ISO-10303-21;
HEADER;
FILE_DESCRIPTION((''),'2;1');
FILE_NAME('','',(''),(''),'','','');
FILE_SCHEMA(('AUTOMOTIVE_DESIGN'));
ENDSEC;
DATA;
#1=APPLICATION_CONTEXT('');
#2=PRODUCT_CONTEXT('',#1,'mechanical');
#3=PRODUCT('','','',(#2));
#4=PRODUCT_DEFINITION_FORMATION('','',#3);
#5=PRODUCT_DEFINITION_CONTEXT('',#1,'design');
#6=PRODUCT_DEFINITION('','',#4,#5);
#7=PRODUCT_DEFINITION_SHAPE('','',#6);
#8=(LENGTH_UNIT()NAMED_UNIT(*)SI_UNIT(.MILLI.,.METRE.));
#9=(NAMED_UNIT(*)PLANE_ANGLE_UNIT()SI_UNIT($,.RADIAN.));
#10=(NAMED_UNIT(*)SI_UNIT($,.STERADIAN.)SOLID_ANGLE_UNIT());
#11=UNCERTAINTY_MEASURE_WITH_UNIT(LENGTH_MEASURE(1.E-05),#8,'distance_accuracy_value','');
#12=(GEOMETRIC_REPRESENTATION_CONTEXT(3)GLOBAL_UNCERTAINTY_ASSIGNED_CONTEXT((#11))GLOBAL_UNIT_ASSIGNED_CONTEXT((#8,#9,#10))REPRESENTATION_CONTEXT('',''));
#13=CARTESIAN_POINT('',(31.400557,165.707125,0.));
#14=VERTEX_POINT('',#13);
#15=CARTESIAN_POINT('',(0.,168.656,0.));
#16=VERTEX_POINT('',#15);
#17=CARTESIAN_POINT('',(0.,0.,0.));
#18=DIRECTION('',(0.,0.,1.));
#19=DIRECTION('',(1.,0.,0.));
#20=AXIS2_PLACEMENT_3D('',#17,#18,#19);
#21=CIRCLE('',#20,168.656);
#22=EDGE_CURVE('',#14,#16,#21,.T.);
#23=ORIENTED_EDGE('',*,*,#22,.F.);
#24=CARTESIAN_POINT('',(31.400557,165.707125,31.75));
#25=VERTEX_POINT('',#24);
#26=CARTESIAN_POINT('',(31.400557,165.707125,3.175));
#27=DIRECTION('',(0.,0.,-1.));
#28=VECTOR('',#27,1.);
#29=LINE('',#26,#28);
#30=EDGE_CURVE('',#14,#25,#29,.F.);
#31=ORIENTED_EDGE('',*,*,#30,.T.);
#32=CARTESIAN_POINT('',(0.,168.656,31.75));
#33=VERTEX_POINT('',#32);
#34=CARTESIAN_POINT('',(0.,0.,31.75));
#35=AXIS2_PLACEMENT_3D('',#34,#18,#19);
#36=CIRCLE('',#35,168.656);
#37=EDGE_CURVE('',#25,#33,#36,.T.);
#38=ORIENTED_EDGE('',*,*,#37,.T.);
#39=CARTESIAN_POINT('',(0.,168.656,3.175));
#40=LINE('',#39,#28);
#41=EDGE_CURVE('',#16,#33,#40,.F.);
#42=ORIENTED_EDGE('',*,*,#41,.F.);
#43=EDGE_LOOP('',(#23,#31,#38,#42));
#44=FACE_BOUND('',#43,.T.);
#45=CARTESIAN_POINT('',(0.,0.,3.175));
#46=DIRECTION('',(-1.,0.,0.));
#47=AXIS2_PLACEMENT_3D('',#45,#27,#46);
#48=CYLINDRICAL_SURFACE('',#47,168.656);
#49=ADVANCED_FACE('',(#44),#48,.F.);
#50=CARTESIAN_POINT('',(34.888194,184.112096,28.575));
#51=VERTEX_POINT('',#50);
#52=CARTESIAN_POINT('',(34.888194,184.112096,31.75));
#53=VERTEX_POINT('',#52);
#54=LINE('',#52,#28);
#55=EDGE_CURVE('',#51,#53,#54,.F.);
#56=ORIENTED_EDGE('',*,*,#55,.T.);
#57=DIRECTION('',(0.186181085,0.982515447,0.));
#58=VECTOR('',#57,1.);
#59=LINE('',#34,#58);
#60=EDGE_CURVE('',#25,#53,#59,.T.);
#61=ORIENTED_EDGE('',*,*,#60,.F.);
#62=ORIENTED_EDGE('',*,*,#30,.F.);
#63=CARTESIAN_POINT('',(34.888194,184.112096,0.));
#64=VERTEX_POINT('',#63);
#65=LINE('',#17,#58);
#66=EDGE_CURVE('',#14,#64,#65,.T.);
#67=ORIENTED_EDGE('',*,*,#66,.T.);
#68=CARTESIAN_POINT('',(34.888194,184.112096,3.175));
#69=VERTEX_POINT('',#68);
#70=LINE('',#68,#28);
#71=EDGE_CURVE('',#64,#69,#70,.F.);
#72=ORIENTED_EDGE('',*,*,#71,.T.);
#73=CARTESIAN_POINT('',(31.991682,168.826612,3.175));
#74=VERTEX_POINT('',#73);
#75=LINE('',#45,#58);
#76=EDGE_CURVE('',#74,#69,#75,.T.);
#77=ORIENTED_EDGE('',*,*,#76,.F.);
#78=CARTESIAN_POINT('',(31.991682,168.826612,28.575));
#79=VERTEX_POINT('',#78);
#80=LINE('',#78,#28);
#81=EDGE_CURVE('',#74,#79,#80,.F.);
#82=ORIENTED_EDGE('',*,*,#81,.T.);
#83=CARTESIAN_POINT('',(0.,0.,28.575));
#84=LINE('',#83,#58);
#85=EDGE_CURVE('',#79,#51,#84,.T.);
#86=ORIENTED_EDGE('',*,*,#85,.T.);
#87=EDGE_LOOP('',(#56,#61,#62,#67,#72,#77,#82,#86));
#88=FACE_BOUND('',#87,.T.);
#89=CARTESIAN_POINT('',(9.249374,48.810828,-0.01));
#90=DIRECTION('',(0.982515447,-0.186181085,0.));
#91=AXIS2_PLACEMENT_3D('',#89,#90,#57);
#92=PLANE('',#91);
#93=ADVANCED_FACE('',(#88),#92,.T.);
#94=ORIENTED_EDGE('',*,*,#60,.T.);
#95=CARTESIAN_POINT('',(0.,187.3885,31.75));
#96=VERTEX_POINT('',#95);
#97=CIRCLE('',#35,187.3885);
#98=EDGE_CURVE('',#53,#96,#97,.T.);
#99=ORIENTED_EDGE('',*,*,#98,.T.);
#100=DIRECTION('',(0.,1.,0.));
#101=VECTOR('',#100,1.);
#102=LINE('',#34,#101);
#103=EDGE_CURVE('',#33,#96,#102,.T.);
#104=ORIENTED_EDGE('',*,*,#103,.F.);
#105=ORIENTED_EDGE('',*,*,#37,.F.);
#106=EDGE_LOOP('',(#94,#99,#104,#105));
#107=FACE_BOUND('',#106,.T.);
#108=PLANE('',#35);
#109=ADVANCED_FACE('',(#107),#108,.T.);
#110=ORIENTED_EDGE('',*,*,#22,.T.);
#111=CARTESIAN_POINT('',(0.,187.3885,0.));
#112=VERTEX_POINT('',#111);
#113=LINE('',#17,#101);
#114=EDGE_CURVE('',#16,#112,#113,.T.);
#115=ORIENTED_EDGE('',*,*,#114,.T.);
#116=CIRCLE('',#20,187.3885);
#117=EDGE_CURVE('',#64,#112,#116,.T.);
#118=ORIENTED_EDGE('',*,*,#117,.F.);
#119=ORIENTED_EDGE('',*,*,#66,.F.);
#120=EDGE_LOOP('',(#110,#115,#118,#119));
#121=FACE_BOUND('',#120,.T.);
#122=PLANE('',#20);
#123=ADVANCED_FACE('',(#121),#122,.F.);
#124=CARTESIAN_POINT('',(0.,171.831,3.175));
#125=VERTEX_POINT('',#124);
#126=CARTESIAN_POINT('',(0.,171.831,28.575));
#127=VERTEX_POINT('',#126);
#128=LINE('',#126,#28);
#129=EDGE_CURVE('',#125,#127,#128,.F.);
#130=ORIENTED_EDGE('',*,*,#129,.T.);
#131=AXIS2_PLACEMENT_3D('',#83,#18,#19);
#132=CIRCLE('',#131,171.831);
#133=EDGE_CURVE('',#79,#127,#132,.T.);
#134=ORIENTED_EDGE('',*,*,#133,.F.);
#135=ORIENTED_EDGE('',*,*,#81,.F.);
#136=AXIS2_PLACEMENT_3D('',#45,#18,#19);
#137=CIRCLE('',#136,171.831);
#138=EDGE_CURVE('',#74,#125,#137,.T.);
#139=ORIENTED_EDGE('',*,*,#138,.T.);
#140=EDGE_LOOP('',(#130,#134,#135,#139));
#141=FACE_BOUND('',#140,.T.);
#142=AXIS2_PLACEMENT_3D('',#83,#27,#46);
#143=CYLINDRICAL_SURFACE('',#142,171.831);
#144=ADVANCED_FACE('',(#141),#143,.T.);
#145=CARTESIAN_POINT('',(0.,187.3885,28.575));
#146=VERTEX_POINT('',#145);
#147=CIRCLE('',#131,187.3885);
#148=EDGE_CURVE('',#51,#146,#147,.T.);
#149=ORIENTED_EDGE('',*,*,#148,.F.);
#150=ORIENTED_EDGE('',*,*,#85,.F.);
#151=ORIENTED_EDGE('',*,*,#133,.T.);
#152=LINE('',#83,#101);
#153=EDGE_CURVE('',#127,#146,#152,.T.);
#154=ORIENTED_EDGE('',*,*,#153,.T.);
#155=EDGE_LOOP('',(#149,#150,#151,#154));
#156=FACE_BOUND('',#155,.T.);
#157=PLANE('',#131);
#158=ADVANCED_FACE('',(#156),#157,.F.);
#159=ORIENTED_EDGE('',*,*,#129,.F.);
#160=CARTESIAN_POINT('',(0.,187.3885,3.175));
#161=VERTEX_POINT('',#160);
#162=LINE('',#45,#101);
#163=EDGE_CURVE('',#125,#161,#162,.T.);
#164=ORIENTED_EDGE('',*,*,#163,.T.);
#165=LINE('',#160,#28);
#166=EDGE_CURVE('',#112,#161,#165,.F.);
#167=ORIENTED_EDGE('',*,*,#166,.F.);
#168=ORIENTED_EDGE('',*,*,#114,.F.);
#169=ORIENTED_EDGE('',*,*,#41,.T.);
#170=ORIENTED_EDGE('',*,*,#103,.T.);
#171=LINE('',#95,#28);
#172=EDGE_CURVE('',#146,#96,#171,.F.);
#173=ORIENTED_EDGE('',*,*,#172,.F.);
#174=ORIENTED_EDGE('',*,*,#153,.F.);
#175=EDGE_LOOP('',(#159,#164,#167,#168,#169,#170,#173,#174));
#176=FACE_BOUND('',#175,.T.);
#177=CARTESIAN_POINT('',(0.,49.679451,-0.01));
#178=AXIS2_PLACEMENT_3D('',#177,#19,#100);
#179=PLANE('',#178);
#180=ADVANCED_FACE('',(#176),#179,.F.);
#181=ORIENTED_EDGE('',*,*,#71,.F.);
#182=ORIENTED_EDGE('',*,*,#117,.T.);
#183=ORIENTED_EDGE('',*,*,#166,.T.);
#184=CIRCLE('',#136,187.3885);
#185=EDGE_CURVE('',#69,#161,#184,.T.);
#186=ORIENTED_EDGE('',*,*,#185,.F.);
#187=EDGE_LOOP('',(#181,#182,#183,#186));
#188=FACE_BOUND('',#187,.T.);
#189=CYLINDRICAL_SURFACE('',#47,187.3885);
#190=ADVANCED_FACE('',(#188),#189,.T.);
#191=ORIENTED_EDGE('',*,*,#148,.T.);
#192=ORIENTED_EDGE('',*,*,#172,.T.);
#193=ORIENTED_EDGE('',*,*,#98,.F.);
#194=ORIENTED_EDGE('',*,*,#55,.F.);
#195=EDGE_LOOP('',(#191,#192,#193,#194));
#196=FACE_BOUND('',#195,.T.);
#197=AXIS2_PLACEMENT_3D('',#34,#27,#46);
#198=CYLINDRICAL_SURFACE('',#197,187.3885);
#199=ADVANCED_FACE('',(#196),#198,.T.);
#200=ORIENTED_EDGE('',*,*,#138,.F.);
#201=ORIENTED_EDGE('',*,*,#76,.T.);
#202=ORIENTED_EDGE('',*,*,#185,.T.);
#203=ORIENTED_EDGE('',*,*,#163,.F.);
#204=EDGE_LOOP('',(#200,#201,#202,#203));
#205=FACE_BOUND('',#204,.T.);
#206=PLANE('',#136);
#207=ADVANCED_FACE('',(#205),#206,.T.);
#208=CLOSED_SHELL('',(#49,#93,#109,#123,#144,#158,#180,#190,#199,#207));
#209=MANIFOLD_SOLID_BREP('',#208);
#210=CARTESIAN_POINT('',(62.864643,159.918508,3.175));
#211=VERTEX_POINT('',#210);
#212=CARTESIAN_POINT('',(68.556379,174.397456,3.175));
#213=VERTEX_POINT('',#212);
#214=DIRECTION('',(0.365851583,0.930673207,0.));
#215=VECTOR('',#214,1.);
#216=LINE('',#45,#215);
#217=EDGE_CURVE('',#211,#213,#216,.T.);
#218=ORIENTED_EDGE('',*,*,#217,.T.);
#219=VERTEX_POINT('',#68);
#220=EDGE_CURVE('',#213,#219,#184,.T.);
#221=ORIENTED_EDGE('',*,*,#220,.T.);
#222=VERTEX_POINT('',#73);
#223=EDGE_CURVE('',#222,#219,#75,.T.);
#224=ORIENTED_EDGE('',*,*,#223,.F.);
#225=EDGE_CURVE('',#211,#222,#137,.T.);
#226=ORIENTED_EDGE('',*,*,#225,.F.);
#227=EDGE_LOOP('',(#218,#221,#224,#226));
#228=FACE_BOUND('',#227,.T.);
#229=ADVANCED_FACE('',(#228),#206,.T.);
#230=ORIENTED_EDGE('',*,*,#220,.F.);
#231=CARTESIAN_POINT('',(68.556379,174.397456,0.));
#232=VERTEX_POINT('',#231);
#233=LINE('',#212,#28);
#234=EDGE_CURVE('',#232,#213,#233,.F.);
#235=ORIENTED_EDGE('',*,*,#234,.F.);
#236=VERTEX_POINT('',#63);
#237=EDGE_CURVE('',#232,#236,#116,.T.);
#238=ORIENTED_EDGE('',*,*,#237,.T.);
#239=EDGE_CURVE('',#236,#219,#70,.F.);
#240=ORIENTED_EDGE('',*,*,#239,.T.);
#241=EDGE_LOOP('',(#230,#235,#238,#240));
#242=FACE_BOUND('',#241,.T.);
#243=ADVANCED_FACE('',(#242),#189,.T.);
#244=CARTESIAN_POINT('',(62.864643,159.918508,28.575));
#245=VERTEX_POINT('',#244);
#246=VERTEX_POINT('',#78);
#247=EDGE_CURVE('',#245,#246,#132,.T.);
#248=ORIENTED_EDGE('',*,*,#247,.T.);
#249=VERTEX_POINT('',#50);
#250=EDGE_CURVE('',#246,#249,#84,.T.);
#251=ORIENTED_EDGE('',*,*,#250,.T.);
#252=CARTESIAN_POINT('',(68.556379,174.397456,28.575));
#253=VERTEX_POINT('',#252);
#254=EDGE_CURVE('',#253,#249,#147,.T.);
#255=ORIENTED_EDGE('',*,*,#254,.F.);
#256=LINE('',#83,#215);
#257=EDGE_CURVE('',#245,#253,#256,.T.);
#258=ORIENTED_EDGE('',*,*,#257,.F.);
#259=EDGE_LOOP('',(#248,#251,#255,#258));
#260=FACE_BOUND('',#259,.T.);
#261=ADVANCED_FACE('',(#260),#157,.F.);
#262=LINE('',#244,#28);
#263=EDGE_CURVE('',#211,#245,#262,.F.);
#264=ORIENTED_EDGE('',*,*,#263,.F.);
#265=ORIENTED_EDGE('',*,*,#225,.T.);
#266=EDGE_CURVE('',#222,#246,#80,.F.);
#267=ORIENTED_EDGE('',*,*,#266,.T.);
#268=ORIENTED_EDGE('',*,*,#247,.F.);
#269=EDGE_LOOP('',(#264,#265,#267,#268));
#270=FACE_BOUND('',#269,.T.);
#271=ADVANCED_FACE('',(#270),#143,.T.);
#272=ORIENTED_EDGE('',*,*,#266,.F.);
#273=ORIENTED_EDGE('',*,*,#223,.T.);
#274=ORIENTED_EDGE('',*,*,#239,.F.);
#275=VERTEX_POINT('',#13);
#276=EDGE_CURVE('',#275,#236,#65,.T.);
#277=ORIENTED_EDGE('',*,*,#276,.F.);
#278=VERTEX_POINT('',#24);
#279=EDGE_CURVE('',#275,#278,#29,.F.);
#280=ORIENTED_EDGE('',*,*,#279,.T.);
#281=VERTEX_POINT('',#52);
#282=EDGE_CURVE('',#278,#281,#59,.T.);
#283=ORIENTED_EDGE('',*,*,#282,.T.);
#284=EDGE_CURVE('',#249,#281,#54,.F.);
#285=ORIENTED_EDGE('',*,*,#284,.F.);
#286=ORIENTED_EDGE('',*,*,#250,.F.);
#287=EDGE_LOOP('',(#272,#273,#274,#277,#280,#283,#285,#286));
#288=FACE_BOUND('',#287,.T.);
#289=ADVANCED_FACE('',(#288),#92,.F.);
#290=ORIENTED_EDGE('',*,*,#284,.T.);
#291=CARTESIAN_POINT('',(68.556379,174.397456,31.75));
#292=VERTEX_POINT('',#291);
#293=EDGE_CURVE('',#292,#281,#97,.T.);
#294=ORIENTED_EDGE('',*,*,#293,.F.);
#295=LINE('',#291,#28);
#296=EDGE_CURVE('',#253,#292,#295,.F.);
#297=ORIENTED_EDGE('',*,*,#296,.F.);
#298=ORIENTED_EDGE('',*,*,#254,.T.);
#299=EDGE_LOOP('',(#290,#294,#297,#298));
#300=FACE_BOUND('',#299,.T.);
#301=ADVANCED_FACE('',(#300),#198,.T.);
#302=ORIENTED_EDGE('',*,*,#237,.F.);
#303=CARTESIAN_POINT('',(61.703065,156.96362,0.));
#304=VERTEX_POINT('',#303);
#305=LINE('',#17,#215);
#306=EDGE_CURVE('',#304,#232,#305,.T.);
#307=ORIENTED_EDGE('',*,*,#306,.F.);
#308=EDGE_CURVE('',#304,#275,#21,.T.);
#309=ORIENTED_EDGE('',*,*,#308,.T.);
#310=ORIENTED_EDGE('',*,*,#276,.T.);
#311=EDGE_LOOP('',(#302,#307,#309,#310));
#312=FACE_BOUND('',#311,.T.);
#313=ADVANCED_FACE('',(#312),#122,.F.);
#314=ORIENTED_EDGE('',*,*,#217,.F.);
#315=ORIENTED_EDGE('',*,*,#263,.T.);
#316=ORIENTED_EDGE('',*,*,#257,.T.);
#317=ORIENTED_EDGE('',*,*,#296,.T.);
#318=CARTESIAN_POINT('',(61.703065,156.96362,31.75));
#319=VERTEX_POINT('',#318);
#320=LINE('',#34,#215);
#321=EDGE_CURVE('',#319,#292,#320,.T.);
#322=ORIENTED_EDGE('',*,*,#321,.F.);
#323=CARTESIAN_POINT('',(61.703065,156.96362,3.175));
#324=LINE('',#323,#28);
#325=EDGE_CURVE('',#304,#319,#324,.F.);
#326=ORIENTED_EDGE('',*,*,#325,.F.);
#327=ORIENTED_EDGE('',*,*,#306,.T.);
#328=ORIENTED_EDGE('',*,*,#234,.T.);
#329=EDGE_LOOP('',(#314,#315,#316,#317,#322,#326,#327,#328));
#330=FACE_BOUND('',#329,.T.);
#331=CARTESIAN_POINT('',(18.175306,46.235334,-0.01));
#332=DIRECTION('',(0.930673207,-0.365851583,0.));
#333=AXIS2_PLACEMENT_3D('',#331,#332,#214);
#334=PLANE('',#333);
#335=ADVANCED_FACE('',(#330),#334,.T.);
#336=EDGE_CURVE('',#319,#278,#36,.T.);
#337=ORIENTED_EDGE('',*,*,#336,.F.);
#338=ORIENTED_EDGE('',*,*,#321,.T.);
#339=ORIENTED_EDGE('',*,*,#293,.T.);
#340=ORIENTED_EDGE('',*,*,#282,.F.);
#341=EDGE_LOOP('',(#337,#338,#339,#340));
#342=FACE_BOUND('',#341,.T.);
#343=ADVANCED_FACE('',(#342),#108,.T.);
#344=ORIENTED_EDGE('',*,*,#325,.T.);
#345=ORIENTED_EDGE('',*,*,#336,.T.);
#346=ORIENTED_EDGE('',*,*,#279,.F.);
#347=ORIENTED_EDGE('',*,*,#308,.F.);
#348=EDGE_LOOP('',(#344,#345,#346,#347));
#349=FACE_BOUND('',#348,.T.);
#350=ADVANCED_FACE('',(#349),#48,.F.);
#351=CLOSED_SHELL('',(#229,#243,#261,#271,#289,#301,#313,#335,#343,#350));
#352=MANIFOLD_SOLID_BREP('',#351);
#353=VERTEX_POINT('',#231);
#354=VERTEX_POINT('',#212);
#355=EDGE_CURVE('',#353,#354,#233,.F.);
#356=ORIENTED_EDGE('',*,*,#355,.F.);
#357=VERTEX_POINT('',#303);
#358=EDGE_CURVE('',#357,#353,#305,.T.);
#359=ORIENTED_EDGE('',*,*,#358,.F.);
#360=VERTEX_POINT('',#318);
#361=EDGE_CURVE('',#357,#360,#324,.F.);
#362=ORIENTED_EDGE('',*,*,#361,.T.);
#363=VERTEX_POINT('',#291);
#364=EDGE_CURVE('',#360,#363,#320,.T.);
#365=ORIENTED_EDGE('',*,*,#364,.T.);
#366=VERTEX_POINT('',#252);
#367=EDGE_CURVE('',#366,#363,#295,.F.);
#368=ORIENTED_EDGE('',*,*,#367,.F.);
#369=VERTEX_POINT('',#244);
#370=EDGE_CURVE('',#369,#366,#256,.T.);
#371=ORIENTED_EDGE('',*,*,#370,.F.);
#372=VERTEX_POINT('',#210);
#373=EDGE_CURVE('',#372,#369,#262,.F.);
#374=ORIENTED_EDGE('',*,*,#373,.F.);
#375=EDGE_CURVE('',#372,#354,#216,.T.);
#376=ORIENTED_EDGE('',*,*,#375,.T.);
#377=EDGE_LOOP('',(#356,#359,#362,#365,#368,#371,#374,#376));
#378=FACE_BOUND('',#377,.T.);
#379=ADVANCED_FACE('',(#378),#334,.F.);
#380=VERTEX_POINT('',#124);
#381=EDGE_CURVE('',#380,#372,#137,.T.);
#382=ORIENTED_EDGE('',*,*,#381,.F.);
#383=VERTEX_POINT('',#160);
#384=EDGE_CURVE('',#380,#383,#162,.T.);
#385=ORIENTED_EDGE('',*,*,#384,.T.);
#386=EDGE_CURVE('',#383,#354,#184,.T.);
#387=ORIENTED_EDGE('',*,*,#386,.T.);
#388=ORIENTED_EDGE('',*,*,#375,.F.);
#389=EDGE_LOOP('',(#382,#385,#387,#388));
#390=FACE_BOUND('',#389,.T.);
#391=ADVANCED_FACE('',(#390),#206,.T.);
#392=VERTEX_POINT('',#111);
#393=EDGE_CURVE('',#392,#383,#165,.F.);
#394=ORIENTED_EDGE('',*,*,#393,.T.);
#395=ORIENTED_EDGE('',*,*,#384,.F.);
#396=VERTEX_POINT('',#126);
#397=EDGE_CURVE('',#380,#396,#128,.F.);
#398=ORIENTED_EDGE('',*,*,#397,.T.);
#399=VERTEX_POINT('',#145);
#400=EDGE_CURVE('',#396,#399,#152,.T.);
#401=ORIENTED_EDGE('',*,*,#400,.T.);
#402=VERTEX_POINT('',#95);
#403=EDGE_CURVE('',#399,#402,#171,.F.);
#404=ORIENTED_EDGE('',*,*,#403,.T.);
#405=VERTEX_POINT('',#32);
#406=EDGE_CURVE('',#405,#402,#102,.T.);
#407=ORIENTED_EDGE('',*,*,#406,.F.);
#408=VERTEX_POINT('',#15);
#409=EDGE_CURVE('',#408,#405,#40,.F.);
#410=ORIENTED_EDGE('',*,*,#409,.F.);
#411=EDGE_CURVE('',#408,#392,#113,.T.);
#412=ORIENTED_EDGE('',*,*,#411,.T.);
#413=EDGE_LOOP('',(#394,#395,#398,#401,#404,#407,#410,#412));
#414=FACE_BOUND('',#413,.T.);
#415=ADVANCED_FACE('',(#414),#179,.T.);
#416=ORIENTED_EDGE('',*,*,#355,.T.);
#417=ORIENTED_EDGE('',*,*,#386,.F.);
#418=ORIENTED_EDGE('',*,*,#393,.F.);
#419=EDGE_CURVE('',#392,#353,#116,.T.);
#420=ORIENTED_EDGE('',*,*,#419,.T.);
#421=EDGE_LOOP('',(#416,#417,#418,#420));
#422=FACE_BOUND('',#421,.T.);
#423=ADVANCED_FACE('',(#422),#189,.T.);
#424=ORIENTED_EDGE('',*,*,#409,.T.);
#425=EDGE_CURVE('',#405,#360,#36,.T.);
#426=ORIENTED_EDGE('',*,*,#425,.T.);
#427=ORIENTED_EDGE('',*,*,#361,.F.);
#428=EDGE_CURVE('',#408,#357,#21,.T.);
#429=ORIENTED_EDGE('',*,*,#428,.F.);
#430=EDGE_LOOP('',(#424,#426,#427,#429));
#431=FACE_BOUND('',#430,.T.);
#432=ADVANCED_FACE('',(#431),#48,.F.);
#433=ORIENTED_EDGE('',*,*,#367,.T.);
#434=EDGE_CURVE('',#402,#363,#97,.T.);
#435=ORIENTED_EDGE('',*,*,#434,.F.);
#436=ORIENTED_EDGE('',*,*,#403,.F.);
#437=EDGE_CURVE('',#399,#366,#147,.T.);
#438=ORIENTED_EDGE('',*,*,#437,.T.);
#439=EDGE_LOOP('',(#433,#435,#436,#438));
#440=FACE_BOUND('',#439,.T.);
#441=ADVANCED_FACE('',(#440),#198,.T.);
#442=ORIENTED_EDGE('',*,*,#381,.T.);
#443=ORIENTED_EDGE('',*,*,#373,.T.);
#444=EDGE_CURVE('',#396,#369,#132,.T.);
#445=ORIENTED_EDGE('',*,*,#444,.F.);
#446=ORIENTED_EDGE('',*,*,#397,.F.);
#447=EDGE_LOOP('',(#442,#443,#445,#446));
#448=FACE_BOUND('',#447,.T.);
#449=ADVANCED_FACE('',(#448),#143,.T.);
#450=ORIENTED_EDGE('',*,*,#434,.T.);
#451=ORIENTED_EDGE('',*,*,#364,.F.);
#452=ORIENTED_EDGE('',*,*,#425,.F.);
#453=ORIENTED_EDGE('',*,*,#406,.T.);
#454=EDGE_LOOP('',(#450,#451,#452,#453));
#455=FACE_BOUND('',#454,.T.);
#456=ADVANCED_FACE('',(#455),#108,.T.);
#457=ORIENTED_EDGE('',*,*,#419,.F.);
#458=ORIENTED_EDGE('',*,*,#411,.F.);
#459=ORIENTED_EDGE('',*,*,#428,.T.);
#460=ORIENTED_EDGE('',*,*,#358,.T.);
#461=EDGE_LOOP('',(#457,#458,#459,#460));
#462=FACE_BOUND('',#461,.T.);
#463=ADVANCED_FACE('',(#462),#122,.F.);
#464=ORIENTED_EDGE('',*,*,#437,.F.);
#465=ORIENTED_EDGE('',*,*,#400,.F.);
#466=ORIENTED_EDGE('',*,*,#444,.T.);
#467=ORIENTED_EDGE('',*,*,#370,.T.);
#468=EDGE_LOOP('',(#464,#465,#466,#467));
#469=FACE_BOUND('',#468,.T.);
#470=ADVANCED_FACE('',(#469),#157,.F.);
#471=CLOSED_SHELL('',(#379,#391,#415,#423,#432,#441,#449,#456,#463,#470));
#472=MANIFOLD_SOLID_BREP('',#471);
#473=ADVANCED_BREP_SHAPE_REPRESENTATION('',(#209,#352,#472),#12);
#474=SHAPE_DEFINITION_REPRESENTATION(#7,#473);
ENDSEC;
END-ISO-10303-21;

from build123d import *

# Parameters (mm, degrees)
SKETCH2_R           = 187.3885
SKETCH2_R_2         = 168.656
BOSS_EXTRUDE1_DEPTH = 3.175
SKETCH3_R           = 171.831
SKETCH3_R_2         = 168.656
BOSS_EXTRUDE2_DEPTH = 25.4
SKETCH4_R           = 187.3885
SKETCH4_R_2         = 168.656
BOSS_EXTRUDE3_DEPTH = 3.175
SPLIT3_DEPTH        = 31.75
SPLIT3_2_DEPTH      = 3.175
SPLIT3_START        = 28.575
SPLIT3_3_DEPTH      = 3.175
SPLIT3_4_DEPTH      = 31.75
SPLIT3_5_DEPTH      = 31.75
SPLIT3_6_DEPTH      = 3.175
SPLIT3_7_DEPTH      = 3.175


# Read off the part's stored shape, not the designer's step: Split3
with BuildPart() as part:
    # Sketch2 → Boss-Extrude1 (new body)
    with BuildSketch(Plane.XY):
        Circle(SKETCH2_R)
        Circle(SKETCH2_R_2, mode=Mode.SUBTRACT)
    extrude(amount=BOSS_EXTRUDE1_DEPTH)

    # Sketch3 → Boss-Extrude2 (add)
    with BuildSketch(Plane.XY.offset(3.175)):
        Circle(SKETCH3_R)
        Circle(SKETCH3_R_2, mode=Mode.SUBTRACT)
    extrude(amount=BOSS_EXTRUDE2_DEPTH)

    # Sketch4 → Boss-Extrude3 (add)
    with BuildSketch(Plane.XY.offset(28.575)):
        Circle(SKETCH4_R)
        Circle(SKETCH4_R_2, mode=Mode.SUBTRACT)
    extrude(amount=BOSS_EXTRUDE3_DEPTH)

    # Split3 4 outline → Split3 4 (cut)
    with BuildSketch(Plane.XY):
        with BuildLine():
            ThreePointArc((0, 168.656), (31.400557033, 165.707125236), (61.703064661, 156.963620459))
            Line((61.703064661, 156.963620459), (68.556379448, 174.397456315))
            ThreePointArc((68.556379448, 174.397456315), (34.888194203, 184.112095848), (0, 187.3885))
            Line((0, 187.3885), (0, 168.656))
        make_face()
    extrude(amount=SPLIT3_4_DEPTH, mode=Mode.SUBTRACT)


with BuildPart() as body_2:
    # Split3 outline → Split3 (new body)
    with BuildSketch(Plane.XY):
        with BuildLine():
            Line((0, 171.831), (0, 168.656))
            ThreePointArc((0, 168.656), (15.769359882, 167.917162985), (31.400557033, 165.707125236))
            Line((31.400557033, 165.707125236), (31.991681977, 168.826611781))
            ThreePointArc((31.991681977, 168.826611781), (16.066222832, 171.078254156), (0, 171.831))
        make_face()
    extrude(amount=SPLIT3_DEPTH)

    # Split3 2 outline → Split3 2 (add)
    with BuildSketch(Plane.XY):
        with BuildLine():
            Line((0, 187.3885), (0, 171.831))
            ThreePointArc((0, 171.831), (16.066222832, 171.078254156), (31.991681977, 168.826611781))
            Line((31.991681977, 168.826611781), (34.888194203, 184.112095848))
            ThreePointArc((34.888194203, 184.112095848), (17.520851284, 186.567600892), (0, 187.3885))
        make_face()
    extrude(amount=SPLIT3_2_DEPTH)

    # Split3 3 outline → Split3 3 (add)
    with BuildSketch(Plane.XY.offset(SPLIT3_START)):
        with BuildLine():
            Line((0, 187.3885), (0, 171.831))
            ThreePointArc((0, 171.831), (16.066222832, 171.078254156), (31.991681977, 168.826611781))
            Line((31.991681977, 168.826611781), (34.888194203, 184.112095848))
            ThreePointArc((34.888194203, 184.112095848), (17.520851284, 186.567600892), (0, 187.3885))
        make_face()
    extrude(amount=SPLIT3_3_DEPTH)


with BuildPart() as body_3:
    # Split3 5 outline → Split3 5 (new body)
    with BuildSketch(Plane.XY):
        with BuildLine():
            Line((31.991681977, 168.826611781), (31.400557033, 165.707125236))
            ThreePointArc((31.400557033, 165.707125236), (46.75663923, 162.045249927), (61.703064661, 156.963620459))
            Line((61.703064661, 156.963620459), (62.864643438, 159.918507892))
            ThreePointArc((62.864643438, 159.918507892), (47.636847047, 165.095800566), (31.991681977, 168.826611781))
        make_face()
    extrude(amount=SPLIT3_5_DEPTH)

    # Split3 6 outline → Split3 6 (add)
    with BuildSketch(Plane.XY):
        with BuildLine():
            Line((34.888194203, 184.112095848), (31.991681977, 168.826611781))
            ThreePointArc((31.991681977, 168.826611781), (47.636847047, 165.095800566), (62.864643438, 159.918507892))
            Line((62.864643438, 159.918507892), (68.556379448, 174.397456315))
            ThreePointArc((68.556379448, 174.397456315), (51.949865349, 180.043498695), (34.888194203, 184.112095848))
        make_face()
    extrude(amount=SPLIT3_6_DEPTH)

    # Split3 7 outline → Split3 7 (add)
    with BuildSketch(Plane.XY.offset(SPLIT3_START)):
        with BuildLine():
            Line((34.888194203, 184.112095848), (31.991681977, 168.826611781))
            ThreePointArc((31.991681977, 168.826611781), (47.636847047, 165.095800566), (62.864643438, 159.918507892))
            Line((62.864643438, 159.918507892), (68.556379448, 174.397456315))
            ThreePointArc((68.556379448, 174.397456315), (51.949865349, 180.043498695), (34.888194203, 184.112095848))
        make_face()
    extrude(amount=SPLIT3_7_DEPTH)


solid = Compound([part.part, body_2.part, body_3.part])
